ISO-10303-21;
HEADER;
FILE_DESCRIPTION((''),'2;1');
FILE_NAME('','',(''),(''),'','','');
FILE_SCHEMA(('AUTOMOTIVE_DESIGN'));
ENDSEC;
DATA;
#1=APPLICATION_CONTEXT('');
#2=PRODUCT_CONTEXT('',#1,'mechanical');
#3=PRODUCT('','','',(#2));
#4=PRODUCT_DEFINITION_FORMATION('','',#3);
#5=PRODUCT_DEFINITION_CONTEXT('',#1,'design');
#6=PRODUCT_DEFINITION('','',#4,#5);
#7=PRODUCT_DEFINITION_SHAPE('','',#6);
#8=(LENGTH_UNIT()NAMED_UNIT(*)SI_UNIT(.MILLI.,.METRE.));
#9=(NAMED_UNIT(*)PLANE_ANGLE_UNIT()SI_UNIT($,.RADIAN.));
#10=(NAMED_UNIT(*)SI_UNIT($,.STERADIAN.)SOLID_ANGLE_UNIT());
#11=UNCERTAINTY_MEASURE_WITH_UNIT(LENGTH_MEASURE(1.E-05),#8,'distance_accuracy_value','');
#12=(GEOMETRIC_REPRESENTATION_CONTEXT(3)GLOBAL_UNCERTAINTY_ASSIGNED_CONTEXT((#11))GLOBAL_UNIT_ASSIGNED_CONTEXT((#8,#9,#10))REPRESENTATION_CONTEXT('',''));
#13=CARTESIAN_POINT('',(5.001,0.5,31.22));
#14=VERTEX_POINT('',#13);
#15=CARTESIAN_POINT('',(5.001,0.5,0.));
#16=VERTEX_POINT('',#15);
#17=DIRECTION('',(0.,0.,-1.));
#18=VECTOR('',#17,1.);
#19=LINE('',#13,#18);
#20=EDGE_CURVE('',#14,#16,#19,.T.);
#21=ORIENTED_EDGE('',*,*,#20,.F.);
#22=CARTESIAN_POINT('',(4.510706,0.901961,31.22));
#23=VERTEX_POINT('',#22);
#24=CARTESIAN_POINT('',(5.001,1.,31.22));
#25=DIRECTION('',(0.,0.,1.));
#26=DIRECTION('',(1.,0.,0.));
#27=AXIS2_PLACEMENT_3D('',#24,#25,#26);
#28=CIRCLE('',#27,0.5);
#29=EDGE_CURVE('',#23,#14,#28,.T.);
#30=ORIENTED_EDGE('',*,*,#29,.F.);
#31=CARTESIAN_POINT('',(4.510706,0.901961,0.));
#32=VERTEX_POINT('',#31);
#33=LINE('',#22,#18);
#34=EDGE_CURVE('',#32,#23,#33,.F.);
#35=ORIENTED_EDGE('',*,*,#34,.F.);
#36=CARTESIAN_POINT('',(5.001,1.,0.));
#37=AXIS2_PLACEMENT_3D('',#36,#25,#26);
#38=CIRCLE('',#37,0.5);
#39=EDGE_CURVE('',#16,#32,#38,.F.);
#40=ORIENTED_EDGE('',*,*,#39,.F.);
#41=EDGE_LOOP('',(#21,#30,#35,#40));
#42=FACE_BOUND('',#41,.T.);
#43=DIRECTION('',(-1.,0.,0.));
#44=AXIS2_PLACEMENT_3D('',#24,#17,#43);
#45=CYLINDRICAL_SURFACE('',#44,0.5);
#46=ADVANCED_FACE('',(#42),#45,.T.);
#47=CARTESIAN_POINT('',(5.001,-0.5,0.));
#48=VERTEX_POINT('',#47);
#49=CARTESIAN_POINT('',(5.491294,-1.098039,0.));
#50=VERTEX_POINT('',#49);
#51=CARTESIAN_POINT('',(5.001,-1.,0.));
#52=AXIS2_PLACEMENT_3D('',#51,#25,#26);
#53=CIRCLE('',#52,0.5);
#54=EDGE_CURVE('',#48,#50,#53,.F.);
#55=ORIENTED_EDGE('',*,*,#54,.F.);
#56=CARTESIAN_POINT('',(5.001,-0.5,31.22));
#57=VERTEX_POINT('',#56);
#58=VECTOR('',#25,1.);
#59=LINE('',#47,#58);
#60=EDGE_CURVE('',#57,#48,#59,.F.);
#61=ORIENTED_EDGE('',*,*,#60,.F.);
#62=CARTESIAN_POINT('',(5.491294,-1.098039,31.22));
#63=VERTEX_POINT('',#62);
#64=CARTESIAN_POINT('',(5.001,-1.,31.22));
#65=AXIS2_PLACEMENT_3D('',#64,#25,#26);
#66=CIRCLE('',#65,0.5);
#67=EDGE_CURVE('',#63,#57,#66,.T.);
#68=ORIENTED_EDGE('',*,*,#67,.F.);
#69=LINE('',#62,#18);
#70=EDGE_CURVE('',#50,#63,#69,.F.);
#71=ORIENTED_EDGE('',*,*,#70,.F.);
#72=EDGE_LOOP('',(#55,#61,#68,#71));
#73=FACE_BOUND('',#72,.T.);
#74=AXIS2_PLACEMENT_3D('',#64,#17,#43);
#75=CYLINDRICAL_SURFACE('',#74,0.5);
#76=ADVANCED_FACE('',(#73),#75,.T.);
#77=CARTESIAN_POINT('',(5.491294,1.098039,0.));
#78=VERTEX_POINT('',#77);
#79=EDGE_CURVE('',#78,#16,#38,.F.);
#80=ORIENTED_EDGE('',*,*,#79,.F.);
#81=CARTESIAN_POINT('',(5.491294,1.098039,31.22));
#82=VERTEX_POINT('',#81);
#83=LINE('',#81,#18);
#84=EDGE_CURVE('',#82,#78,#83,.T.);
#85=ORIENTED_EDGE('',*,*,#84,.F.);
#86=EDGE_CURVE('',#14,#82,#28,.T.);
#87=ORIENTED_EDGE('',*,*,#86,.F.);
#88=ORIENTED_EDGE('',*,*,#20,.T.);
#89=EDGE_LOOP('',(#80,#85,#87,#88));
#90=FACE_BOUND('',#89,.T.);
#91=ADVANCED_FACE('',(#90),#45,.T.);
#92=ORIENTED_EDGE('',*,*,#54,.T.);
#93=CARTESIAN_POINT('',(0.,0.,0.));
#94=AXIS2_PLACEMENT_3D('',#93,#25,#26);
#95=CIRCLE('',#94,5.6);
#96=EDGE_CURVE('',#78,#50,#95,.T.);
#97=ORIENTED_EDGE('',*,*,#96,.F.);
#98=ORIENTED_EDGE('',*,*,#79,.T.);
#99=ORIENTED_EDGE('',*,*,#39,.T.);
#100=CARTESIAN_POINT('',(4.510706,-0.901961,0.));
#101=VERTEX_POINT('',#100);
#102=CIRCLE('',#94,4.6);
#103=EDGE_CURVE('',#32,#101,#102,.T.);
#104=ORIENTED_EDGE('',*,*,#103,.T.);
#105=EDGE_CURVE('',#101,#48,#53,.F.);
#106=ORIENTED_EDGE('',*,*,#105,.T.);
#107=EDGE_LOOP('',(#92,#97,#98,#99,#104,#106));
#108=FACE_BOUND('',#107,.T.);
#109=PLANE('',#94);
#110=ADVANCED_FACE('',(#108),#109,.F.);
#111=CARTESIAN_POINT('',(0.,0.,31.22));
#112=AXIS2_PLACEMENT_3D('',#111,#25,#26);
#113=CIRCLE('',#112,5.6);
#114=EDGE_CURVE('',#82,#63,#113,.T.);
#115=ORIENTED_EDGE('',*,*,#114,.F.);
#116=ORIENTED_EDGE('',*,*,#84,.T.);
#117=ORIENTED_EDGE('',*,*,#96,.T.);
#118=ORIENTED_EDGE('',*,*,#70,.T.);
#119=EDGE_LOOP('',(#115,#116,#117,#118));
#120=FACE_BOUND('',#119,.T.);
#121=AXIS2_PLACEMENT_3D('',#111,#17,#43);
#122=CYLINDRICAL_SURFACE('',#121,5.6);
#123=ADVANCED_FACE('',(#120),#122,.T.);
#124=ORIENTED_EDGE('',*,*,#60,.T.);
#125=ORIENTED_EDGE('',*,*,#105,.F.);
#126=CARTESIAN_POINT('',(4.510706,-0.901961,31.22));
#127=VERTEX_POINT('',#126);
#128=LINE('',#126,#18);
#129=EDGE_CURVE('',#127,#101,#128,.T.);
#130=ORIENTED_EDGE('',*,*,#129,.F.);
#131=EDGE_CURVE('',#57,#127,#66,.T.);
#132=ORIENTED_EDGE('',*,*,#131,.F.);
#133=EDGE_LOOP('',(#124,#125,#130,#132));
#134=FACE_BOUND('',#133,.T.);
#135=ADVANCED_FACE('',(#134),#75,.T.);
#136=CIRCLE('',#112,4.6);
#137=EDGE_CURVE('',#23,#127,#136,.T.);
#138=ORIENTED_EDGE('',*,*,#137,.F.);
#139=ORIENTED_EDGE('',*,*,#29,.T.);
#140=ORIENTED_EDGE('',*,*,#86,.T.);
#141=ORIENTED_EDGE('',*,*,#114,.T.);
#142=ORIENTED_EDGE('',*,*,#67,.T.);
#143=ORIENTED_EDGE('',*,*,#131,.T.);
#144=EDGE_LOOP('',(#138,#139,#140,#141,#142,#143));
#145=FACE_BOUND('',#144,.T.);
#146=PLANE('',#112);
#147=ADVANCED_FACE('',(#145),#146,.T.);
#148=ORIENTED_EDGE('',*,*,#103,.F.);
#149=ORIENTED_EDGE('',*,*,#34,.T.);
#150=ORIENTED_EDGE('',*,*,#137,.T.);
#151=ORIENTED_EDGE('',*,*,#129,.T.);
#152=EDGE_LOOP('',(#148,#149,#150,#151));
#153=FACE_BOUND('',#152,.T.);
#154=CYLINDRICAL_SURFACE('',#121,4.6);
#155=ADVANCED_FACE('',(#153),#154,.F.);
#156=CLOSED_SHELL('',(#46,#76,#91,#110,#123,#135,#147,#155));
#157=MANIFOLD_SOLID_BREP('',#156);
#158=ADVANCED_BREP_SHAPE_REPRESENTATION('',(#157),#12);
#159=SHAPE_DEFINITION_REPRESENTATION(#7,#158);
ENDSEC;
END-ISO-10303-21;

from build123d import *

# Parameters (mm, degrees)
SKETCH_1_R          = 5.6
SKETCH_1_R_2        = 4.6
EXTRUDE_1_DEPTH     = 31.22
SKETCH_2_W          = 4.086350381
SKETCH_2_H          = 1
CUT_EXTRUDE_1_DEPTH = 33.208824878
FILLET_1_R          = 0.5


with BuildPart() as part:
    # 스케치1 → 보스-돌출1 (new body)
    with BuildSketch(Plane.XY):
        Circle(SKETCH_1_R)
        Circle(SKETCH_1_R_2, mode=Mode.SUBTRACT)
    extrude(amount=EXTRUDE_1_DEPTH)

    # 스케치2 → 컷-돌출1 (cut, through all)
    with BuildSketch(Plane.XY):
        with Locations((5.169276946, 0)):
            Rectangle(SKETCH_2_W, SKETCH_2_H)
    extrude(amount=CUT_EXTRUDE_1_DEPTH, mode=Mode.SUBTRACT)

    # 필렛1
    fillet_1_edges = [part.edges().sort_by_distance(p)[0] for p in [
        (4.572745346, -0.5, 15.61),
        (5.577633907, -0.5, 15.61),
        (5.577633907, 0.5, 15.61),
        (4.572745346, 0.5, 15.61),
    ]]
    fillet(fillet_1_edges, radius=FILLET_1_R - 0.0001)  # a hair under: the kernel refuses the full size


solid = part.part
